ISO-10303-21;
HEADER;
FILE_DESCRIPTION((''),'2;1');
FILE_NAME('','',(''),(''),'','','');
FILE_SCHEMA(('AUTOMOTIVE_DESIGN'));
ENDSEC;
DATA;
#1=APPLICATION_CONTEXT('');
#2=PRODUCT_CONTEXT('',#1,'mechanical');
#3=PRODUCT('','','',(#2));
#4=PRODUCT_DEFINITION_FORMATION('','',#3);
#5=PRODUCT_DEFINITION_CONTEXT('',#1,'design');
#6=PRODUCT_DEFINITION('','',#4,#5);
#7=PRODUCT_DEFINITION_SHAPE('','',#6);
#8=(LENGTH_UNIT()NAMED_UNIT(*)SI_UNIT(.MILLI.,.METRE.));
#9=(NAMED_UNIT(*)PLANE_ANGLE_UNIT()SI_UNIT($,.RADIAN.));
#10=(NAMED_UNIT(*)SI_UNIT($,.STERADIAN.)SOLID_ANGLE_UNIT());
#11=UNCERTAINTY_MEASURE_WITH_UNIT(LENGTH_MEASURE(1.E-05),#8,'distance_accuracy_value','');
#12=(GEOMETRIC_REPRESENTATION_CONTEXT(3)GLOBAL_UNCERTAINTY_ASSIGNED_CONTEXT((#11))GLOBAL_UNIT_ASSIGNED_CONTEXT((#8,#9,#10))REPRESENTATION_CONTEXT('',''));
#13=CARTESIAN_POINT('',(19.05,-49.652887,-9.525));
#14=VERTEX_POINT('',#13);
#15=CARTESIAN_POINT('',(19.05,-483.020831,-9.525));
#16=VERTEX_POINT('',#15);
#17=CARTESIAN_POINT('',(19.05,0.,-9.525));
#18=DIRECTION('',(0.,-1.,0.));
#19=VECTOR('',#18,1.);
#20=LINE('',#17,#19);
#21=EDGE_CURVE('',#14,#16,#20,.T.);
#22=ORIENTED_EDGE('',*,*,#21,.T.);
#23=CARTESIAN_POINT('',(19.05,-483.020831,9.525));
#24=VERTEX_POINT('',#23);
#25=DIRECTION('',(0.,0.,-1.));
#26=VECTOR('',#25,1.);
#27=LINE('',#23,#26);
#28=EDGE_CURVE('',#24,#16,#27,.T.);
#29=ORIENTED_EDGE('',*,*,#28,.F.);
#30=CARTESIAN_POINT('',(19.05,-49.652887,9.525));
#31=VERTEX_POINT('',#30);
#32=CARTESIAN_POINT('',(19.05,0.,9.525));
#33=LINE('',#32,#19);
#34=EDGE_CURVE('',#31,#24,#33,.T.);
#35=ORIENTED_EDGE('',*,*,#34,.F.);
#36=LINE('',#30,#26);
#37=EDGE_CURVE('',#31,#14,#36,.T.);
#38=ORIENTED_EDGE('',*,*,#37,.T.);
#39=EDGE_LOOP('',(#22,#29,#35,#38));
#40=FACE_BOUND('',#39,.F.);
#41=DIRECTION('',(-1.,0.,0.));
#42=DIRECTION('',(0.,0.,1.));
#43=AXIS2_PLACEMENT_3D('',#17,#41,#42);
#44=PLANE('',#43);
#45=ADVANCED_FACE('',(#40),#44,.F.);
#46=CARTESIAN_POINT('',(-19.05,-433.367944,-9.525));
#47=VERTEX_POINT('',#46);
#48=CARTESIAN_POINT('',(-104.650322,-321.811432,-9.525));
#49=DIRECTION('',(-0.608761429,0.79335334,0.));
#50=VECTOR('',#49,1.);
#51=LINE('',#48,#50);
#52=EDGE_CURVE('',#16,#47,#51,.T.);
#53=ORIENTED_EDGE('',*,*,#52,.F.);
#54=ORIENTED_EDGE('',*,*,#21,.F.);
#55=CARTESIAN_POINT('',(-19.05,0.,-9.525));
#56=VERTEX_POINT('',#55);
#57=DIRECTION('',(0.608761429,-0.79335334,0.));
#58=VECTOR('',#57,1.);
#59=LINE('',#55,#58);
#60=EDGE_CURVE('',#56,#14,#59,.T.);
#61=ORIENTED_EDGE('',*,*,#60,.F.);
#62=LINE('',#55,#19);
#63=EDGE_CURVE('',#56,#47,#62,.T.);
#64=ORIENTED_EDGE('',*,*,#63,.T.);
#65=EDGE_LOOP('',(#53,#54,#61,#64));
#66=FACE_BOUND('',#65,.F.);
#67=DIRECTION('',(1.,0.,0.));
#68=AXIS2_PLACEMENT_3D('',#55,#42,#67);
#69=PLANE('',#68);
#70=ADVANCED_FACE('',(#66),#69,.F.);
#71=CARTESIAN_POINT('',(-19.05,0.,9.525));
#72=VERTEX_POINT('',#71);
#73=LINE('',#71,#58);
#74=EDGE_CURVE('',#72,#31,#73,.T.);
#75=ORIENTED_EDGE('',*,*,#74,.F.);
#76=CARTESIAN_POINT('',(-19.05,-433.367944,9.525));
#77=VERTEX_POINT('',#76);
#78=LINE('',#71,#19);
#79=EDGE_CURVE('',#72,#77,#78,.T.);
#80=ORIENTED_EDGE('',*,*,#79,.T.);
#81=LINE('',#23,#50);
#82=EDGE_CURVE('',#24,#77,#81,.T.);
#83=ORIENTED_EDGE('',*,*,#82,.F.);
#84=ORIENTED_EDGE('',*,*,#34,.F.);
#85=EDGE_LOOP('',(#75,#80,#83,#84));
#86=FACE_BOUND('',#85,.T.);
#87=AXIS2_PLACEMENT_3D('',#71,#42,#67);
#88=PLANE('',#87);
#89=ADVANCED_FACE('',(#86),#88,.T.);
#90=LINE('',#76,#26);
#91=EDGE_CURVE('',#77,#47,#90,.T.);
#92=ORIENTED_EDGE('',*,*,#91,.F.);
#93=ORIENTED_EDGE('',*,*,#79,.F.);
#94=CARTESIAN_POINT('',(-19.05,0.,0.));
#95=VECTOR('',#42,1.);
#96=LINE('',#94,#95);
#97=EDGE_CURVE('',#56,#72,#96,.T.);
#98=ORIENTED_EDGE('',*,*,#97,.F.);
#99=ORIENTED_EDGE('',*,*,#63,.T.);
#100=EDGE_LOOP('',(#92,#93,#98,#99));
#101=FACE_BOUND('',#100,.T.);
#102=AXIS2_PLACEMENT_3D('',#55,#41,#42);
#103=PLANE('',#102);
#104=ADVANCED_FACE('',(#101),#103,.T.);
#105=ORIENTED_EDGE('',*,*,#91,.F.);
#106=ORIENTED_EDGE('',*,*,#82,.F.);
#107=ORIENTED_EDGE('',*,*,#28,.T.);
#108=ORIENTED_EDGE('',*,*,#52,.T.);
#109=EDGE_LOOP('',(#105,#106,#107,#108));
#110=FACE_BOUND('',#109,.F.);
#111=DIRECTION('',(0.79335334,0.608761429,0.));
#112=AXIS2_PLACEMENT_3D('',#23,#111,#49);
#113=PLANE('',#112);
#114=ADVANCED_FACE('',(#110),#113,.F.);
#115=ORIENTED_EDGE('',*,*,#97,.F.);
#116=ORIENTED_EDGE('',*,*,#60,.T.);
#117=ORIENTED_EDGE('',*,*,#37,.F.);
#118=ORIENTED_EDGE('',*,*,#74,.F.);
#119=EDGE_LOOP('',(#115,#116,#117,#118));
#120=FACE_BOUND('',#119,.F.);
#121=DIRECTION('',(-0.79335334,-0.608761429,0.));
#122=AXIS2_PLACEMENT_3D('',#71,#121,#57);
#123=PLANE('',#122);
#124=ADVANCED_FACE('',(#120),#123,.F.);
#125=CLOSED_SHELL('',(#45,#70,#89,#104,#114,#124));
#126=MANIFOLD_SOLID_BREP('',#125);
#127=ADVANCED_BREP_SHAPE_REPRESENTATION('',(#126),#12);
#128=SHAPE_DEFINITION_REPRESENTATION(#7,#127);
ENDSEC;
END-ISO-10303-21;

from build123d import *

# Parameters (mm, degrees)
F0_W     = 38.1
F0_H     = 19.05
F1_DEPTH = 508
F3_DEPTH = 19.051


# Not quite as in the source:
# - a feature names something its author has since deleted; it is built from what else it names


with BuildPart() as f1:
    # F0 (on Front) → F1 (new body)
    with BuildSketch(Plane.XZ):
        Rectangle(F0_W, F0_H)
    extrude(amount=F1_DEPTH)

    # F2 (on face) → F3 (cut, through all)
    with BuildSketch(Plane.XY.offset(9.525)):
        Polygon((19.05, 0), (-19.05, 0), (19.05, -49.6528867052), align=None)
        Polygon((19.05, -483.0208308118), (-19.05, -433.3679441065), (-19.05, -508), (19.05, -508), align=None)
    extrude(amount=-F3_DEPTH, mode=Mode.SUBTRACT)


solid = f1.part
